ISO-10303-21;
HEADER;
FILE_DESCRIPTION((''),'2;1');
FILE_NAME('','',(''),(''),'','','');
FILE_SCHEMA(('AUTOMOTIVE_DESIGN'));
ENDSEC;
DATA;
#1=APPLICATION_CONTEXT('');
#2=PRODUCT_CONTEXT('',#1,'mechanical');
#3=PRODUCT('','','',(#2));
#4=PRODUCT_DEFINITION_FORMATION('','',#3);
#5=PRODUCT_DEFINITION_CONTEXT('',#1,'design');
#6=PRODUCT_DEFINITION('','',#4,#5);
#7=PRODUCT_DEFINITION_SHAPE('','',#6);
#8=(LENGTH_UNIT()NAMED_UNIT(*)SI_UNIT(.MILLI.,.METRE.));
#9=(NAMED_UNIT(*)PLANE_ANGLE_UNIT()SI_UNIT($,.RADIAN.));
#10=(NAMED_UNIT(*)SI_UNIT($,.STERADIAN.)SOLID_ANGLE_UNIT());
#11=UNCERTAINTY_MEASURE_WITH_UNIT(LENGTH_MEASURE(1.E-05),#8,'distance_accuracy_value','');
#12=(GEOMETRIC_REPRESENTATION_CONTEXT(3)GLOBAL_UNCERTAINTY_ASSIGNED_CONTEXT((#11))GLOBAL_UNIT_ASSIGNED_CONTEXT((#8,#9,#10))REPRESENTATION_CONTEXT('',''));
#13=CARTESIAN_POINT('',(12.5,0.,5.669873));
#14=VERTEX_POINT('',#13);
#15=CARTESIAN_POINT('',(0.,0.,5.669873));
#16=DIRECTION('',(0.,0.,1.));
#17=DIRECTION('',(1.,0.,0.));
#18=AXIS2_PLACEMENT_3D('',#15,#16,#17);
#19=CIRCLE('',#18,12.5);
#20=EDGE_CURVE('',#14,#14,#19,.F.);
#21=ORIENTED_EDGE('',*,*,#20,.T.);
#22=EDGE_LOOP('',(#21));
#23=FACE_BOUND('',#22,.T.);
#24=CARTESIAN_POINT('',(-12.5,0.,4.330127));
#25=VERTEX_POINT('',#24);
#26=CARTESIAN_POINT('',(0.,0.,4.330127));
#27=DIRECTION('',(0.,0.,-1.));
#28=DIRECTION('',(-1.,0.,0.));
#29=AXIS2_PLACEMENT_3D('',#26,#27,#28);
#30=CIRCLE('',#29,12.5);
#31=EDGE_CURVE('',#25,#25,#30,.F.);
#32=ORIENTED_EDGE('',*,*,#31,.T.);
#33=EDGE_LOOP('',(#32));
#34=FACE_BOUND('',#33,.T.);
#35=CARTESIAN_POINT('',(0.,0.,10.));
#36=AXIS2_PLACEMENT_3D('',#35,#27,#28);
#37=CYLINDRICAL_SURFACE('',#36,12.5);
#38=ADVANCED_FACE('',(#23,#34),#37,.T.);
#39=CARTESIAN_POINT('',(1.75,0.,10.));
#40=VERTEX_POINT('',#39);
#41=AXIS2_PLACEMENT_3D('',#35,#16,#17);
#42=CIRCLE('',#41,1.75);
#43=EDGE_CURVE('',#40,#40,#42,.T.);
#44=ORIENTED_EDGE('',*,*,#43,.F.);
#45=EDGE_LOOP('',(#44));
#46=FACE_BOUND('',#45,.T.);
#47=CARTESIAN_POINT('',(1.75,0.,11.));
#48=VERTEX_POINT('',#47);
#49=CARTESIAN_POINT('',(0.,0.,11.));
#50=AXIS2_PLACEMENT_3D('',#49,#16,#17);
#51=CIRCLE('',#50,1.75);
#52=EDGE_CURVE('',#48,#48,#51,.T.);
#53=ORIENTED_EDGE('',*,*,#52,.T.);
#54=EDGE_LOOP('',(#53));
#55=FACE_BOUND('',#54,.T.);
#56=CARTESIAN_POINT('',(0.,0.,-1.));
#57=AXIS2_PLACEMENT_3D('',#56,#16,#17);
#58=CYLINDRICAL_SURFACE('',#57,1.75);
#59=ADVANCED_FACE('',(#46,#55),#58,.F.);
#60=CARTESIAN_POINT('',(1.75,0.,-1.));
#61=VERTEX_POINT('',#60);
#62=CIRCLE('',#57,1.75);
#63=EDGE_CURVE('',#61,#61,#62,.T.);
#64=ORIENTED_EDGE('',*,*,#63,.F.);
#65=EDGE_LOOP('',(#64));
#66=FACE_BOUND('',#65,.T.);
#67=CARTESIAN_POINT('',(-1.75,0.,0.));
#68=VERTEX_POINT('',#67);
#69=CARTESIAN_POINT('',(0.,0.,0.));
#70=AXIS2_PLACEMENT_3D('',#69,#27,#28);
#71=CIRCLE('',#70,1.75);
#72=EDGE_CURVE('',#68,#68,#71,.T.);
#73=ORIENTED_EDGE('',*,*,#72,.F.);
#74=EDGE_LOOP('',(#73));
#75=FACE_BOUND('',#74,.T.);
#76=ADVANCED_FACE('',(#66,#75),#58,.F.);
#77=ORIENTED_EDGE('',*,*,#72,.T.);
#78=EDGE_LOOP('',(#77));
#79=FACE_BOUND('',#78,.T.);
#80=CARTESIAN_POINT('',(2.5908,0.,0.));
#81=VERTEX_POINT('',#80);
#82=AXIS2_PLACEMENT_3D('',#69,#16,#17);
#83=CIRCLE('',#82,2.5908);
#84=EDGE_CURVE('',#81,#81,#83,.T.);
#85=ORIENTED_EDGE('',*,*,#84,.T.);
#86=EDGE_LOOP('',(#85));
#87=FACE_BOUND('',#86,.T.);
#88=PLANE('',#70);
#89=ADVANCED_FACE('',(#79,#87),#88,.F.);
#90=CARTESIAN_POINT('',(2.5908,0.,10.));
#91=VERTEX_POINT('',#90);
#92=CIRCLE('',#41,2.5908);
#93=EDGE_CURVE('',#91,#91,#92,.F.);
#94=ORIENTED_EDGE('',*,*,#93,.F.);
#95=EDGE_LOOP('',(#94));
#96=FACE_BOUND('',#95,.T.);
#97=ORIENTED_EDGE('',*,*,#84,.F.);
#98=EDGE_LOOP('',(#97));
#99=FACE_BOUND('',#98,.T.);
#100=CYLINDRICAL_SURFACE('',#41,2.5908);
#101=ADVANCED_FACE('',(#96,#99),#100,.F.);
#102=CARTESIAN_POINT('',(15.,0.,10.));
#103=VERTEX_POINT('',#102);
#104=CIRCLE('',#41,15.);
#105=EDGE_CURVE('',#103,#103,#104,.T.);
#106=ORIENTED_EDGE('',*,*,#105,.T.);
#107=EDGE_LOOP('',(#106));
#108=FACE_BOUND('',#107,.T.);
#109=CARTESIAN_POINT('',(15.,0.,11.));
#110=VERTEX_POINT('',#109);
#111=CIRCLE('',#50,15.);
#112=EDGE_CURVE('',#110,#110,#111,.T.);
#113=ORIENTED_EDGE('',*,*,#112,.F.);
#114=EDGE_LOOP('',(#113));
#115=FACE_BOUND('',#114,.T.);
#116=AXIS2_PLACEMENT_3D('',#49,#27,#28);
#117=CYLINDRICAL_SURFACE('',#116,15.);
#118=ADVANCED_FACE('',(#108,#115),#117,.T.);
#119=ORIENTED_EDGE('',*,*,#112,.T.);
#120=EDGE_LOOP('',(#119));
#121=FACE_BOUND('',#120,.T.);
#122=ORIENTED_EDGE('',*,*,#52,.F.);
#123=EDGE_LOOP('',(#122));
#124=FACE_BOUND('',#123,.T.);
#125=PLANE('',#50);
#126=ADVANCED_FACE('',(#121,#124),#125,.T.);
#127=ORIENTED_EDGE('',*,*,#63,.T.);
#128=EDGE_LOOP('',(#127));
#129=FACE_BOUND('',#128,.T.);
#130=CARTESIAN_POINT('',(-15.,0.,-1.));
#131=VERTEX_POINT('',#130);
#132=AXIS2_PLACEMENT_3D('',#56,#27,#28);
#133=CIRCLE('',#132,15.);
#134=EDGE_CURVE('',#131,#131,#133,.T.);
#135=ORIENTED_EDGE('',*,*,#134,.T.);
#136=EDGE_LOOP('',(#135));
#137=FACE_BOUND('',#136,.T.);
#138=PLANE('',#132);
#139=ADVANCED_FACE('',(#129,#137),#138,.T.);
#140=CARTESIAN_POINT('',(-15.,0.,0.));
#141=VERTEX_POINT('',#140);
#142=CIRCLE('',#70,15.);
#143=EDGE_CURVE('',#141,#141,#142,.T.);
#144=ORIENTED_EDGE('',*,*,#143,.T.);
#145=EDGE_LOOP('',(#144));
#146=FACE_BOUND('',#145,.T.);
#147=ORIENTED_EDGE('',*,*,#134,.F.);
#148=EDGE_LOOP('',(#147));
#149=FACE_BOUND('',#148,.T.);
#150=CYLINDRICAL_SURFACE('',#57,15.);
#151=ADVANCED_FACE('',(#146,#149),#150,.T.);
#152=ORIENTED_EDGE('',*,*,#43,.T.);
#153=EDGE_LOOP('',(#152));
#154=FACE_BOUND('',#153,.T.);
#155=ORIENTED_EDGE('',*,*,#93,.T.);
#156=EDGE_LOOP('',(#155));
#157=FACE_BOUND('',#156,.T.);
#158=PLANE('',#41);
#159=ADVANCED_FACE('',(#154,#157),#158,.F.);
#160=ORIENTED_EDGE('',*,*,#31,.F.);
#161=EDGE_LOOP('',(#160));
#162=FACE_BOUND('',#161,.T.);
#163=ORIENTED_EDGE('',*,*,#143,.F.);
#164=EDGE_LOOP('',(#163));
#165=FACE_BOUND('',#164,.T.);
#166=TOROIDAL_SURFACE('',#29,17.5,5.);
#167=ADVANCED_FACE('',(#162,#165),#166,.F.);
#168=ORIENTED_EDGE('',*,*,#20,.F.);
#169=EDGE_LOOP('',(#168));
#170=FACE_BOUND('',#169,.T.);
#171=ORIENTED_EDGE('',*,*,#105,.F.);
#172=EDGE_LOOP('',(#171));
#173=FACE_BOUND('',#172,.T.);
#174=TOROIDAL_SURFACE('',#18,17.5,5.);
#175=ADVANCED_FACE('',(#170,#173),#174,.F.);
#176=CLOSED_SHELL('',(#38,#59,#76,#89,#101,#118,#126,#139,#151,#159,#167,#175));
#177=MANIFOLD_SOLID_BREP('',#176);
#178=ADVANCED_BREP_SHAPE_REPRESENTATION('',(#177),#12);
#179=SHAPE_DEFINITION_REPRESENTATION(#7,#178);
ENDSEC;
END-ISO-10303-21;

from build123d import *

# Parameters (mm, degrees)
SKETCH1_R                  = 12.5
BOSS_EXTRUDE1_DEPTH        = 10
F_6_0_204_DIAMETER_SLOT2_D = 5.1816
SKETCH10_R                 = 15
BOSS_EXTRUDE2_DEPTH        = 1
BOSS_EXTRUDE3_START        = 1
SKETCH12_R                 = 15
BOSS_EXTRUDE3_DEPTH        = 1
SKETCH13_R                 = 1.75
CUT_EXTRUDE1_DEPTH         = 25.372115214
FILLET4_R                  = 5
FILLET5_R                  = 5


with BuildPart() as part:
    # Sketch1 → Boss-Extrude1 (new body)
    with BuildSketch(Plane.XY):
        Circle(SKETCH1_R)
    extrude(amount=BOSS_EXTRUDE1_DEPTH)

    # #6 (0.204) Diameter Slot2 (through all)
    with Locations(Plane.XY.offset(10)):
        with Locations((0, 0)):
            Hole(F_6_0_204_DIAMETER_SLOT2_D / 2)

    # Sketch10 → Boss-Extrude2 (add)
    with BuildSketch(Plane(origin=(0, 0, 0), x_dir=(-1, 0, 0), z_dir=(0, 0, -1))):
        Circle(SKETCH10_R)
    extrude(amount=BOSS_EXTRUDE2_DEPTH)

    # Sketch12 → Boss-Extrude3 (add)
    with BuildSketch(Plane.XY.offset(10).offset(BOSS_EXTRUDE3_START)):
        with Locations(Location((0, 0, 0), (0, 0, 180))):
            Circle(SKETCH12_R)
    extrude(amount=-BOSS_EXTRUDE3_DEPTH)

    # Sketch13 → Cut-Extrude1 (cut, through all)
    with BuildSketch(Plane.XY.offset(11)):
        Circle(SKETCH13_R)
    extrude(amount=-CUT_EXTRUDE1_DEPTH, mode=Mode.SUBTRACT)

    # Fillet4
    # the kernel refuses this fillet: 5 mm, written as the material it adds along each edge
    with BuildSketch(Plane(origin=(0, 0, 10), x_dir=(1, 0, 0), z_dir=(0, -1, 0))) as fillet4_piece_1:
        with BuildLine():
            CenterArc((17.5, -4.330127019), FILLET4_R, 120, 60)
            Line((12.5, -4.330127019), (12.4, -4.330127019))
            Line((12.4, -4.330127019), (12.4, 0))
            Line((12.4, 0), (12.5, 0.1))
            ThreePointArc((12.5, 0.1), (13.75, 0.1), (14.95, 0.08660254))
            Line((14.95, 0.08660254), (15, 0))
        make_face()
    revolve(axis=Axis((0, 0, 10), (0, 0, 1)))

    # Fillet5
    # the kernel refuses this fillet: 5 mm, written as the material it adds along each edge
    with BuildSketch(Plane(origin=(0, 0, 0), x_dir=(1, 0, 0), z_dir=(0, -1, 0))) as fillet5_piece_1:
        with BuildLine():
            CenterArc((17.5, 4.330127019), FILLET5_R, 180, 60)
            Line((15, 0), (14.95, -0.08660254))
            ThreePointArc((14.95, -0.08660254), (13.75, -0.1), (12.5, -0.1))
            Line((12.5, -0.1), (12.4, 0))
            Line((12.4, 0), (12.4, 4.330127019))
            Line((12.4, 4.330127019), (12.5, 4.330127019))
        make_face()
    revolve(axis=Axis((0, 0, 0), (0, 0, 1)))


solid = part.part
